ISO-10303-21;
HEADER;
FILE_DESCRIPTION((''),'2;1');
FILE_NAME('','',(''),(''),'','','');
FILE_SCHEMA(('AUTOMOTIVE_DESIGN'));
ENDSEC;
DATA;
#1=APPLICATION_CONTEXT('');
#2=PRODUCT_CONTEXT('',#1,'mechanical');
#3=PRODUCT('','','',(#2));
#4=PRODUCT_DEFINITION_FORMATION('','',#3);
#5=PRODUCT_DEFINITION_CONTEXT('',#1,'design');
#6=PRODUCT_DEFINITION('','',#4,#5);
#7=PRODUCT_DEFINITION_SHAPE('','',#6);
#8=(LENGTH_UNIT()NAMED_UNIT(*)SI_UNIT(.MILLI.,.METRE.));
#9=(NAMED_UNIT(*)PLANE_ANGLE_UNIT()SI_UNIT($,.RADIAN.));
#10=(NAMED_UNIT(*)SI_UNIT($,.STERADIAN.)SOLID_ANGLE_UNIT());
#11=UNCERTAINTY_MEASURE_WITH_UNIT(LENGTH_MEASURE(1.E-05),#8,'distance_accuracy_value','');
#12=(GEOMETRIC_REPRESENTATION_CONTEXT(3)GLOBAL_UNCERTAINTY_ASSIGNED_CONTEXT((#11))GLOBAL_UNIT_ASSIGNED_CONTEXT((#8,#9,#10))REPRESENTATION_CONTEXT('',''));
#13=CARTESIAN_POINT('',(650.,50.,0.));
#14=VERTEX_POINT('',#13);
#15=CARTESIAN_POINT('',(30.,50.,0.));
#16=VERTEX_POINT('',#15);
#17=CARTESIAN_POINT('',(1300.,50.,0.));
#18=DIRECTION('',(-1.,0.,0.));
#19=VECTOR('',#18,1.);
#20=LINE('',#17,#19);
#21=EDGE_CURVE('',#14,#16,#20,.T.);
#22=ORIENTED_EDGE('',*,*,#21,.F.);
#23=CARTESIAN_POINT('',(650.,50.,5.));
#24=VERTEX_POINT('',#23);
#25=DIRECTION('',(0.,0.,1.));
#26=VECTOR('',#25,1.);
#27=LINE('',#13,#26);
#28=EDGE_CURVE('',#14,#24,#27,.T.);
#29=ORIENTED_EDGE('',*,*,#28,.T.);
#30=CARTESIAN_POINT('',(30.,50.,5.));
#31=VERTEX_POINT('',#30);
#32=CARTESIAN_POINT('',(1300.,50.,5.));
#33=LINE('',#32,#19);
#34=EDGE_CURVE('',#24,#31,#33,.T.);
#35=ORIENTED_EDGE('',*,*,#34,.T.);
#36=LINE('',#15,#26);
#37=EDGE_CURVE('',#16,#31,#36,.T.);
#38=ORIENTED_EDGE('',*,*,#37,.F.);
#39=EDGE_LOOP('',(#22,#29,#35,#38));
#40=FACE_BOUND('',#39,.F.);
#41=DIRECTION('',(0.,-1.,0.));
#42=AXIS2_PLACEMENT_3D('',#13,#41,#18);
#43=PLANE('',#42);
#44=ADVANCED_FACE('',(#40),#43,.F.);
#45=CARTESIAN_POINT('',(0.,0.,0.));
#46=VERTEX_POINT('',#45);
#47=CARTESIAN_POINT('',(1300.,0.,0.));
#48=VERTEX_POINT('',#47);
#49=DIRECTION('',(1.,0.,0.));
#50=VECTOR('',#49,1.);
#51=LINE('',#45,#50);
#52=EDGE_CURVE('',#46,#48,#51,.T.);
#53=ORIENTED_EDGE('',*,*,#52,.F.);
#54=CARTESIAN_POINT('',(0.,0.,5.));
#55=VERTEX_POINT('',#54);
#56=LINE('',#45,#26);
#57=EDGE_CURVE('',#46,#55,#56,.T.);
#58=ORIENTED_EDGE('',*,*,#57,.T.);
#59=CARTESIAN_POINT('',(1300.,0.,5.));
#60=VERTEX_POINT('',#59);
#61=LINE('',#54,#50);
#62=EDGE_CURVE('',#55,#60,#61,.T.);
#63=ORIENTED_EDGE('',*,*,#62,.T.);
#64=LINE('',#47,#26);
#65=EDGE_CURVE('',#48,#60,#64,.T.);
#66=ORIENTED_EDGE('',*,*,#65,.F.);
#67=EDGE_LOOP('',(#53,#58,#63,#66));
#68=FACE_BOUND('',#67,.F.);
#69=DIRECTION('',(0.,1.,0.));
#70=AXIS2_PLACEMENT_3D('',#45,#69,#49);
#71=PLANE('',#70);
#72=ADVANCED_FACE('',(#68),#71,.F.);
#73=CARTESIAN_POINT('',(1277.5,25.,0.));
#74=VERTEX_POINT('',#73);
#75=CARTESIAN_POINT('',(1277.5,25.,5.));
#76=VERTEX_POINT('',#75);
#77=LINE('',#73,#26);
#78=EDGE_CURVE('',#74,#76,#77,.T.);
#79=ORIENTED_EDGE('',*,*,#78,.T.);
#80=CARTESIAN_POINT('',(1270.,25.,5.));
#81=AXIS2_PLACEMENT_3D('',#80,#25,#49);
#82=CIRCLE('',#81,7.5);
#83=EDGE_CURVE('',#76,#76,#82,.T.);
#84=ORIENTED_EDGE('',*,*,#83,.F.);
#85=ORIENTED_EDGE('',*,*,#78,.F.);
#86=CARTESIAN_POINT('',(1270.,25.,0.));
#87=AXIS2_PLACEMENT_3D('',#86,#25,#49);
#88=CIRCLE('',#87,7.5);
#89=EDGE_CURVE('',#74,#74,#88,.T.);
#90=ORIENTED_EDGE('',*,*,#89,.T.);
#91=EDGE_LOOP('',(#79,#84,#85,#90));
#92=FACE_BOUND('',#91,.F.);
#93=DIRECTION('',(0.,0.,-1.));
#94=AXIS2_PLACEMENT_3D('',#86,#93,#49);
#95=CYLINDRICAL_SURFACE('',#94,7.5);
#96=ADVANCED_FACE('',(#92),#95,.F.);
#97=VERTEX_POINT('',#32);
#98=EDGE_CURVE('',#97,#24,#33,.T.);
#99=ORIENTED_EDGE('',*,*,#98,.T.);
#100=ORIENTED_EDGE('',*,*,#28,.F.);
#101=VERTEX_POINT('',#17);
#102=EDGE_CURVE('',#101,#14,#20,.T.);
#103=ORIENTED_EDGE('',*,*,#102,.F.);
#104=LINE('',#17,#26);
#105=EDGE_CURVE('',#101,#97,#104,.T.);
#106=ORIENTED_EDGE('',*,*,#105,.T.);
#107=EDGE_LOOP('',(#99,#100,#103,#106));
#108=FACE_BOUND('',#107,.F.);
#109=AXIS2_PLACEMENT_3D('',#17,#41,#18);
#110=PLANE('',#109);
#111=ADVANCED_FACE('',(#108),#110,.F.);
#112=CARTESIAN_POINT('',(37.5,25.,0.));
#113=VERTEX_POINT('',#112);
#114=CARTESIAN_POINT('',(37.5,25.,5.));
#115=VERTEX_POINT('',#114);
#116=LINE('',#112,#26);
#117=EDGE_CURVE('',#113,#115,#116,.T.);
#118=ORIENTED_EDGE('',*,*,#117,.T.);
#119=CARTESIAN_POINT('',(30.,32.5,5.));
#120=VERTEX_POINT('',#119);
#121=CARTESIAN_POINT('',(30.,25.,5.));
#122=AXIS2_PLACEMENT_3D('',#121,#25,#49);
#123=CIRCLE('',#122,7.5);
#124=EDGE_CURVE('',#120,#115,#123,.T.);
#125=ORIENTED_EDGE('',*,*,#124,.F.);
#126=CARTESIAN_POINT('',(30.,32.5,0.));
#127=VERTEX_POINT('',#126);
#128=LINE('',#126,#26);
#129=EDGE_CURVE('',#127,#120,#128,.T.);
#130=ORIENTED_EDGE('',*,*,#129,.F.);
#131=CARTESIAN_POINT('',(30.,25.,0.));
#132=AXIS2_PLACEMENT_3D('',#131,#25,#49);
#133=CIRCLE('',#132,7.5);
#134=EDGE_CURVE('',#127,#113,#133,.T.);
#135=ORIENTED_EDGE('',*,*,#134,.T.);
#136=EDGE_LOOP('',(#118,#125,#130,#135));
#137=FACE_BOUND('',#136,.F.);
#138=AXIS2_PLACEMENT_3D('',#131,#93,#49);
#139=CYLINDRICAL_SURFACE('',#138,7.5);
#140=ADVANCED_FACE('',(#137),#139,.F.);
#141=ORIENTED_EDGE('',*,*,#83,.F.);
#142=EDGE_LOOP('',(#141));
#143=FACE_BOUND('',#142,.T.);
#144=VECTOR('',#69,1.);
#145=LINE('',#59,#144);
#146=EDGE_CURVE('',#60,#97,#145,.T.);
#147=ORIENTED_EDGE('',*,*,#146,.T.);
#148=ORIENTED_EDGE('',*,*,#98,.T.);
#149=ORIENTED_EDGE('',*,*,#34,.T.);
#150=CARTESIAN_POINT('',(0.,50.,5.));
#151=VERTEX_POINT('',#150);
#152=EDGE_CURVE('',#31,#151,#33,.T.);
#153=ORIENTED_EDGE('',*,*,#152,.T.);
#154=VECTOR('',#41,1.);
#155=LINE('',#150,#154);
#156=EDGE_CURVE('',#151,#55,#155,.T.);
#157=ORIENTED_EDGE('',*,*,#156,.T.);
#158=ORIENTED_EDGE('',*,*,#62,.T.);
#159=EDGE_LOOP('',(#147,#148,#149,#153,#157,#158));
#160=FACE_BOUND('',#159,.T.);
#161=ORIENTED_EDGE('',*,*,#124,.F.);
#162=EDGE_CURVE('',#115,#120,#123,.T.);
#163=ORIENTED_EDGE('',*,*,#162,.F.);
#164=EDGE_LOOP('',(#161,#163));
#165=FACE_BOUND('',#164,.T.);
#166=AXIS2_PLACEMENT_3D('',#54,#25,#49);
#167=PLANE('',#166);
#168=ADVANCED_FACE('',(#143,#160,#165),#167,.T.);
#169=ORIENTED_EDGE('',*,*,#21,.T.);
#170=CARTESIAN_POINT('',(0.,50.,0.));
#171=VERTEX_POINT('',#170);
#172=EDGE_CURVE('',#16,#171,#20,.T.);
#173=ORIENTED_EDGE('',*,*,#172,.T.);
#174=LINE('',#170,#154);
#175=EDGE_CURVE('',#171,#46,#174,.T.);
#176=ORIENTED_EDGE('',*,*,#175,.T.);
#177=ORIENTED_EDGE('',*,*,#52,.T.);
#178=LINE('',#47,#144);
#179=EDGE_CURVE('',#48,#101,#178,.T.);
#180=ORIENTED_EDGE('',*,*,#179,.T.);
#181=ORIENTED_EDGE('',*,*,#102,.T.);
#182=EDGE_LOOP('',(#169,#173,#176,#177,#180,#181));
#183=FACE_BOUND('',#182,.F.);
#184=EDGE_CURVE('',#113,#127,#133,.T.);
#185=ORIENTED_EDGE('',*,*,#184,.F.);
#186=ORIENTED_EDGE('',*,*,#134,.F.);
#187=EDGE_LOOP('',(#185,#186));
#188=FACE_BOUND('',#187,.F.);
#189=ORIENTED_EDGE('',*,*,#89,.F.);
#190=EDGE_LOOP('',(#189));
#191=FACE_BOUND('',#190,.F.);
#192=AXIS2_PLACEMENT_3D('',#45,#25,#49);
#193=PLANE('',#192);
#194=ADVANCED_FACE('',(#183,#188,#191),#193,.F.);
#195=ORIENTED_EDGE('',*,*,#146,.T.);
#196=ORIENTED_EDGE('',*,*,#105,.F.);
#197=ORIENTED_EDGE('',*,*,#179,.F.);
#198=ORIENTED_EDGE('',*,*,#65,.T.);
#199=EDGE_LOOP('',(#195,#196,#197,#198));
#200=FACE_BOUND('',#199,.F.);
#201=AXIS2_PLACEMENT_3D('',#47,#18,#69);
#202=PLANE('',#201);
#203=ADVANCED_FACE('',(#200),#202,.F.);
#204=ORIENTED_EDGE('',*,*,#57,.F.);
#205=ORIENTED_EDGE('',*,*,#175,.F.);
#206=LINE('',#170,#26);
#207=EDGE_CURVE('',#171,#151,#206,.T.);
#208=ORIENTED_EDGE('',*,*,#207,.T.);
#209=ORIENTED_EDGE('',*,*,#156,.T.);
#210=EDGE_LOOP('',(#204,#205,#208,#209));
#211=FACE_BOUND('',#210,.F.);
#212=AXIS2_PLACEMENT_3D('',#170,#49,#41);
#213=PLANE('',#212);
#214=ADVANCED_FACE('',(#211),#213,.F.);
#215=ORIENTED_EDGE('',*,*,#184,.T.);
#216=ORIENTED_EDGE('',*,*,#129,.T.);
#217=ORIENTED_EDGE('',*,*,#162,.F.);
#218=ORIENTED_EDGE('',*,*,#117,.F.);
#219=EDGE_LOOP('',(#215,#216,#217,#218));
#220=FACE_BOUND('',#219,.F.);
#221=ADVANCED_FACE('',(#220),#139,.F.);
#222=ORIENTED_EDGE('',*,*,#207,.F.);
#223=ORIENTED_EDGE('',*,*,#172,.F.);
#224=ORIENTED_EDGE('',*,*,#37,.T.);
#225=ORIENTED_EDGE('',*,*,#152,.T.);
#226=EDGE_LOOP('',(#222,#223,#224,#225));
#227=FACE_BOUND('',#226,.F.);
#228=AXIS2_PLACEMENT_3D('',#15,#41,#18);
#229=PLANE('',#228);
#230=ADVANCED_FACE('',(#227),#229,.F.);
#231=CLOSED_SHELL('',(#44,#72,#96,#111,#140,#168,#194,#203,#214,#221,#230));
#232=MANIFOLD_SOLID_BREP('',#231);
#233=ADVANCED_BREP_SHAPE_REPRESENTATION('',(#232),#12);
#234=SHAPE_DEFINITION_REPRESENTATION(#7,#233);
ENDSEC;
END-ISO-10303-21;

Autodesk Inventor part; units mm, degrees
ref_plane "YZ Plane" through (0, 0, 0) normal (1, 0, 0) x (0, 1, 0)
ref_plane "XZ Plane" through (0, 0, 0) normal (0, 1, 0) x (-1, 0, 0)
ref_plane "XY Plane" through (0, 0, 0) normal (0, 0, 1) x (1, 0, 0)
sketch "Sketch1" plane through (0, 0, 0) normal (0, 0, 1) x (1, 0, 0)
  line L0 (0, 0) -> (1300, 0)
  line L1 (1300, 0) -> (1300, 50)
  line L2 (1300, 50) -> (0, 50)
  line L3 (0, 50) -> (0, 0)
  line L4 (0, 50) -> (30, 50)
  line L5 (30, 50) -> (30, 25)
  circle A0 centre (30, 25) radius 7.5
  line L6 (650, 50) -> (650, 17.5)
  circle A1 centre (1270, 25) radius 7.5
  dimension "d0" = 1300
  dimension "d1" = 50
  dimension "d4" = 30
  dimension "d5" = 15
extrude "Extrusion2" add sketch "Sketch1" along normal blind 5
